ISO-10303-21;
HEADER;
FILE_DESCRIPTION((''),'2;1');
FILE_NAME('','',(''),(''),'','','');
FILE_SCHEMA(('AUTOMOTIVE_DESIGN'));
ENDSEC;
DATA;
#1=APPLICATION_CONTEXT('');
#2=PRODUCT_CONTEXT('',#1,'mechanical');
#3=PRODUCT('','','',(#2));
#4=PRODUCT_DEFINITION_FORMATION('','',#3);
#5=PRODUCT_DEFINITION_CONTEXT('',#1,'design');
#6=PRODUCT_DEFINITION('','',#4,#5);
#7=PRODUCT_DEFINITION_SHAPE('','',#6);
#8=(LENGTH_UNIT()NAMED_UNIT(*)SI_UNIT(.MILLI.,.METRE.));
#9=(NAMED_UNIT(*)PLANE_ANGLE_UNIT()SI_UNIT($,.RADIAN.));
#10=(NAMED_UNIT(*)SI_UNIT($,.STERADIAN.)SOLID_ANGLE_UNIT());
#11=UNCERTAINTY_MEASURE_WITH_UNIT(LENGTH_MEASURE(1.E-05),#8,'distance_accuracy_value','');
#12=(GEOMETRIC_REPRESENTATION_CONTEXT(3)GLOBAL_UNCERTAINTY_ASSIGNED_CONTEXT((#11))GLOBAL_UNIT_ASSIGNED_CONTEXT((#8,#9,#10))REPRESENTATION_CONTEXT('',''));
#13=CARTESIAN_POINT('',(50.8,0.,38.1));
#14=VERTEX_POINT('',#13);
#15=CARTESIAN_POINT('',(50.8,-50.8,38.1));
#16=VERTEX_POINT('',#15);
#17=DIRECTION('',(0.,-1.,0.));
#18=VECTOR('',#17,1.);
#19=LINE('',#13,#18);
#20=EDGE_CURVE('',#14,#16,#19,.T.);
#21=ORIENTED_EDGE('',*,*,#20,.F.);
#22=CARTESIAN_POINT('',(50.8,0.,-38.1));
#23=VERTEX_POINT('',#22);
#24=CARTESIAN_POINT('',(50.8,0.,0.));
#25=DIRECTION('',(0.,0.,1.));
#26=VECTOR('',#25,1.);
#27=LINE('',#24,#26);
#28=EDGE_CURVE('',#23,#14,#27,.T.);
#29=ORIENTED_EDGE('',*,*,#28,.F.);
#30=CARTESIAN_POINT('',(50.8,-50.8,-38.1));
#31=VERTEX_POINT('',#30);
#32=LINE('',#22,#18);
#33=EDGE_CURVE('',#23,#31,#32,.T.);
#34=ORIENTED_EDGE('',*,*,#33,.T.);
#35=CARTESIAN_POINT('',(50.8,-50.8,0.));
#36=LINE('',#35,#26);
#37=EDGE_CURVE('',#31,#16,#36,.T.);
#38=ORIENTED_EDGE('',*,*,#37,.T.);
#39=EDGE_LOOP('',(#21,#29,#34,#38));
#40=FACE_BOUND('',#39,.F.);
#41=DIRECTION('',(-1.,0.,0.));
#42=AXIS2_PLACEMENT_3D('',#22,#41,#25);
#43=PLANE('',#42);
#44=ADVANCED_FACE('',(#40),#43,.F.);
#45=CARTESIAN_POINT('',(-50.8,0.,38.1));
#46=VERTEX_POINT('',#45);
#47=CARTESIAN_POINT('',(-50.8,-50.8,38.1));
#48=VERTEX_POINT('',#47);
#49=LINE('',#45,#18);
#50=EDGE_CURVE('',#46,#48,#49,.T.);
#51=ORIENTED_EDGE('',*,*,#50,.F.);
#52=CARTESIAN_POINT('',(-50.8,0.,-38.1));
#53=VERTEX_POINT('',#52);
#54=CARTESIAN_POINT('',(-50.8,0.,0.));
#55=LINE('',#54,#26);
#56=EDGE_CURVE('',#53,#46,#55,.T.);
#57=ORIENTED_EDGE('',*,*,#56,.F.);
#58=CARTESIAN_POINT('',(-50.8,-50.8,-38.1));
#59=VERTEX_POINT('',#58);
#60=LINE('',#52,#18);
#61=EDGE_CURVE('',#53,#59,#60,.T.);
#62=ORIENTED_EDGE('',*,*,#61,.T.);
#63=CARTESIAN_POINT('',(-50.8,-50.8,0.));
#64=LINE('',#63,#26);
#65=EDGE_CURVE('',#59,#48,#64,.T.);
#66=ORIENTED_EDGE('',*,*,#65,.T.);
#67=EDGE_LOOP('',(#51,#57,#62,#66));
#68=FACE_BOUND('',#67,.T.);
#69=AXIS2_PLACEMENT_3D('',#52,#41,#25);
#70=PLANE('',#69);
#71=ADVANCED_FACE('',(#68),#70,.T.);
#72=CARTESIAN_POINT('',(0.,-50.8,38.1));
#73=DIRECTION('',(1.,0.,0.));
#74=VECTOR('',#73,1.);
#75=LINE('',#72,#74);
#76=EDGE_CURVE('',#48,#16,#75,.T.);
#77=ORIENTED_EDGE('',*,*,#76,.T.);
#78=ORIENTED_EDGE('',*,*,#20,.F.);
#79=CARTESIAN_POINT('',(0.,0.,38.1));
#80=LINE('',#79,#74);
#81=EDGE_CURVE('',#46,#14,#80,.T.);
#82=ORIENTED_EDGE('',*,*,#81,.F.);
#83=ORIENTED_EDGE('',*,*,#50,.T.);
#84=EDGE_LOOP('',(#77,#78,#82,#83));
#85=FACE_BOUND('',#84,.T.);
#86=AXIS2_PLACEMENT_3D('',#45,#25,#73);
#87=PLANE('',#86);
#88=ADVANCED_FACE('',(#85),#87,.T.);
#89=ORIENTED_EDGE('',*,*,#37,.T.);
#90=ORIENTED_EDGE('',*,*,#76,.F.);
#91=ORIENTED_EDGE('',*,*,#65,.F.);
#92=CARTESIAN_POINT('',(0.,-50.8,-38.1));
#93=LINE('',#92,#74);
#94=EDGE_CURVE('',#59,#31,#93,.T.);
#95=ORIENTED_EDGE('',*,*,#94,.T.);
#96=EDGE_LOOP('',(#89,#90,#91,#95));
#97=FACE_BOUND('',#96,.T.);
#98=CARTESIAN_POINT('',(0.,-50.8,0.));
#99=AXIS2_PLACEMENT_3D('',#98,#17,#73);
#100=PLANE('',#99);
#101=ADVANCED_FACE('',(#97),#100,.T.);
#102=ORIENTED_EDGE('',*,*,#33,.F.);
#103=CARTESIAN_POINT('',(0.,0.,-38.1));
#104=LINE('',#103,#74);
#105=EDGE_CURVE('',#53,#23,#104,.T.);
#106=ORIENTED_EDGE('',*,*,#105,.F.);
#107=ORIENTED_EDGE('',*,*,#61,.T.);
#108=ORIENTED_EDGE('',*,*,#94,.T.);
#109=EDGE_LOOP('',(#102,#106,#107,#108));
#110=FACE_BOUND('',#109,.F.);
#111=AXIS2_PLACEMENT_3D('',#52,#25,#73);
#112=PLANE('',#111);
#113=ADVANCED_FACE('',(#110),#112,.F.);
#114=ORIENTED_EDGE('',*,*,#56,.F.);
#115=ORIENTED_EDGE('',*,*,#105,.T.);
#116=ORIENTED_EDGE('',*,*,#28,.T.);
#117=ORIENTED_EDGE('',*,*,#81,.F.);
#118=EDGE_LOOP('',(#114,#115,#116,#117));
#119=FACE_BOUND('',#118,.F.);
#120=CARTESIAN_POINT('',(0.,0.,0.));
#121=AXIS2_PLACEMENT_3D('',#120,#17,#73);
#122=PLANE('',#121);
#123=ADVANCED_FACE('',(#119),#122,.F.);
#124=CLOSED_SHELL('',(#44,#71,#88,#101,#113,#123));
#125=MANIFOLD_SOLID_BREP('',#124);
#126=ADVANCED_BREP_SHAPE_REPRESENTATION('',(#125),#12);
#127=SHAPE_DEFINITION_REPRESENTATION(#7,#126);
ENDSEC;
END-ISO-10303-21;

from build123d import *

# Parameters (mm, degrees)
F1_W     = 101.6
F1_H     = 76.2
F2_DEPTH = 50.8


# Not quite as in the source:
# - a feature names something its author has since deleted; it is built from what else it names


with BuildPart() as f2:
    # F1 (on Front) → F2 (new body)
    with BuildSketch(Plane.XZ):
        Rectangle(F1_W, F1_H)
    extrude(amount=F2_DEPTH)


solid = f2.part
